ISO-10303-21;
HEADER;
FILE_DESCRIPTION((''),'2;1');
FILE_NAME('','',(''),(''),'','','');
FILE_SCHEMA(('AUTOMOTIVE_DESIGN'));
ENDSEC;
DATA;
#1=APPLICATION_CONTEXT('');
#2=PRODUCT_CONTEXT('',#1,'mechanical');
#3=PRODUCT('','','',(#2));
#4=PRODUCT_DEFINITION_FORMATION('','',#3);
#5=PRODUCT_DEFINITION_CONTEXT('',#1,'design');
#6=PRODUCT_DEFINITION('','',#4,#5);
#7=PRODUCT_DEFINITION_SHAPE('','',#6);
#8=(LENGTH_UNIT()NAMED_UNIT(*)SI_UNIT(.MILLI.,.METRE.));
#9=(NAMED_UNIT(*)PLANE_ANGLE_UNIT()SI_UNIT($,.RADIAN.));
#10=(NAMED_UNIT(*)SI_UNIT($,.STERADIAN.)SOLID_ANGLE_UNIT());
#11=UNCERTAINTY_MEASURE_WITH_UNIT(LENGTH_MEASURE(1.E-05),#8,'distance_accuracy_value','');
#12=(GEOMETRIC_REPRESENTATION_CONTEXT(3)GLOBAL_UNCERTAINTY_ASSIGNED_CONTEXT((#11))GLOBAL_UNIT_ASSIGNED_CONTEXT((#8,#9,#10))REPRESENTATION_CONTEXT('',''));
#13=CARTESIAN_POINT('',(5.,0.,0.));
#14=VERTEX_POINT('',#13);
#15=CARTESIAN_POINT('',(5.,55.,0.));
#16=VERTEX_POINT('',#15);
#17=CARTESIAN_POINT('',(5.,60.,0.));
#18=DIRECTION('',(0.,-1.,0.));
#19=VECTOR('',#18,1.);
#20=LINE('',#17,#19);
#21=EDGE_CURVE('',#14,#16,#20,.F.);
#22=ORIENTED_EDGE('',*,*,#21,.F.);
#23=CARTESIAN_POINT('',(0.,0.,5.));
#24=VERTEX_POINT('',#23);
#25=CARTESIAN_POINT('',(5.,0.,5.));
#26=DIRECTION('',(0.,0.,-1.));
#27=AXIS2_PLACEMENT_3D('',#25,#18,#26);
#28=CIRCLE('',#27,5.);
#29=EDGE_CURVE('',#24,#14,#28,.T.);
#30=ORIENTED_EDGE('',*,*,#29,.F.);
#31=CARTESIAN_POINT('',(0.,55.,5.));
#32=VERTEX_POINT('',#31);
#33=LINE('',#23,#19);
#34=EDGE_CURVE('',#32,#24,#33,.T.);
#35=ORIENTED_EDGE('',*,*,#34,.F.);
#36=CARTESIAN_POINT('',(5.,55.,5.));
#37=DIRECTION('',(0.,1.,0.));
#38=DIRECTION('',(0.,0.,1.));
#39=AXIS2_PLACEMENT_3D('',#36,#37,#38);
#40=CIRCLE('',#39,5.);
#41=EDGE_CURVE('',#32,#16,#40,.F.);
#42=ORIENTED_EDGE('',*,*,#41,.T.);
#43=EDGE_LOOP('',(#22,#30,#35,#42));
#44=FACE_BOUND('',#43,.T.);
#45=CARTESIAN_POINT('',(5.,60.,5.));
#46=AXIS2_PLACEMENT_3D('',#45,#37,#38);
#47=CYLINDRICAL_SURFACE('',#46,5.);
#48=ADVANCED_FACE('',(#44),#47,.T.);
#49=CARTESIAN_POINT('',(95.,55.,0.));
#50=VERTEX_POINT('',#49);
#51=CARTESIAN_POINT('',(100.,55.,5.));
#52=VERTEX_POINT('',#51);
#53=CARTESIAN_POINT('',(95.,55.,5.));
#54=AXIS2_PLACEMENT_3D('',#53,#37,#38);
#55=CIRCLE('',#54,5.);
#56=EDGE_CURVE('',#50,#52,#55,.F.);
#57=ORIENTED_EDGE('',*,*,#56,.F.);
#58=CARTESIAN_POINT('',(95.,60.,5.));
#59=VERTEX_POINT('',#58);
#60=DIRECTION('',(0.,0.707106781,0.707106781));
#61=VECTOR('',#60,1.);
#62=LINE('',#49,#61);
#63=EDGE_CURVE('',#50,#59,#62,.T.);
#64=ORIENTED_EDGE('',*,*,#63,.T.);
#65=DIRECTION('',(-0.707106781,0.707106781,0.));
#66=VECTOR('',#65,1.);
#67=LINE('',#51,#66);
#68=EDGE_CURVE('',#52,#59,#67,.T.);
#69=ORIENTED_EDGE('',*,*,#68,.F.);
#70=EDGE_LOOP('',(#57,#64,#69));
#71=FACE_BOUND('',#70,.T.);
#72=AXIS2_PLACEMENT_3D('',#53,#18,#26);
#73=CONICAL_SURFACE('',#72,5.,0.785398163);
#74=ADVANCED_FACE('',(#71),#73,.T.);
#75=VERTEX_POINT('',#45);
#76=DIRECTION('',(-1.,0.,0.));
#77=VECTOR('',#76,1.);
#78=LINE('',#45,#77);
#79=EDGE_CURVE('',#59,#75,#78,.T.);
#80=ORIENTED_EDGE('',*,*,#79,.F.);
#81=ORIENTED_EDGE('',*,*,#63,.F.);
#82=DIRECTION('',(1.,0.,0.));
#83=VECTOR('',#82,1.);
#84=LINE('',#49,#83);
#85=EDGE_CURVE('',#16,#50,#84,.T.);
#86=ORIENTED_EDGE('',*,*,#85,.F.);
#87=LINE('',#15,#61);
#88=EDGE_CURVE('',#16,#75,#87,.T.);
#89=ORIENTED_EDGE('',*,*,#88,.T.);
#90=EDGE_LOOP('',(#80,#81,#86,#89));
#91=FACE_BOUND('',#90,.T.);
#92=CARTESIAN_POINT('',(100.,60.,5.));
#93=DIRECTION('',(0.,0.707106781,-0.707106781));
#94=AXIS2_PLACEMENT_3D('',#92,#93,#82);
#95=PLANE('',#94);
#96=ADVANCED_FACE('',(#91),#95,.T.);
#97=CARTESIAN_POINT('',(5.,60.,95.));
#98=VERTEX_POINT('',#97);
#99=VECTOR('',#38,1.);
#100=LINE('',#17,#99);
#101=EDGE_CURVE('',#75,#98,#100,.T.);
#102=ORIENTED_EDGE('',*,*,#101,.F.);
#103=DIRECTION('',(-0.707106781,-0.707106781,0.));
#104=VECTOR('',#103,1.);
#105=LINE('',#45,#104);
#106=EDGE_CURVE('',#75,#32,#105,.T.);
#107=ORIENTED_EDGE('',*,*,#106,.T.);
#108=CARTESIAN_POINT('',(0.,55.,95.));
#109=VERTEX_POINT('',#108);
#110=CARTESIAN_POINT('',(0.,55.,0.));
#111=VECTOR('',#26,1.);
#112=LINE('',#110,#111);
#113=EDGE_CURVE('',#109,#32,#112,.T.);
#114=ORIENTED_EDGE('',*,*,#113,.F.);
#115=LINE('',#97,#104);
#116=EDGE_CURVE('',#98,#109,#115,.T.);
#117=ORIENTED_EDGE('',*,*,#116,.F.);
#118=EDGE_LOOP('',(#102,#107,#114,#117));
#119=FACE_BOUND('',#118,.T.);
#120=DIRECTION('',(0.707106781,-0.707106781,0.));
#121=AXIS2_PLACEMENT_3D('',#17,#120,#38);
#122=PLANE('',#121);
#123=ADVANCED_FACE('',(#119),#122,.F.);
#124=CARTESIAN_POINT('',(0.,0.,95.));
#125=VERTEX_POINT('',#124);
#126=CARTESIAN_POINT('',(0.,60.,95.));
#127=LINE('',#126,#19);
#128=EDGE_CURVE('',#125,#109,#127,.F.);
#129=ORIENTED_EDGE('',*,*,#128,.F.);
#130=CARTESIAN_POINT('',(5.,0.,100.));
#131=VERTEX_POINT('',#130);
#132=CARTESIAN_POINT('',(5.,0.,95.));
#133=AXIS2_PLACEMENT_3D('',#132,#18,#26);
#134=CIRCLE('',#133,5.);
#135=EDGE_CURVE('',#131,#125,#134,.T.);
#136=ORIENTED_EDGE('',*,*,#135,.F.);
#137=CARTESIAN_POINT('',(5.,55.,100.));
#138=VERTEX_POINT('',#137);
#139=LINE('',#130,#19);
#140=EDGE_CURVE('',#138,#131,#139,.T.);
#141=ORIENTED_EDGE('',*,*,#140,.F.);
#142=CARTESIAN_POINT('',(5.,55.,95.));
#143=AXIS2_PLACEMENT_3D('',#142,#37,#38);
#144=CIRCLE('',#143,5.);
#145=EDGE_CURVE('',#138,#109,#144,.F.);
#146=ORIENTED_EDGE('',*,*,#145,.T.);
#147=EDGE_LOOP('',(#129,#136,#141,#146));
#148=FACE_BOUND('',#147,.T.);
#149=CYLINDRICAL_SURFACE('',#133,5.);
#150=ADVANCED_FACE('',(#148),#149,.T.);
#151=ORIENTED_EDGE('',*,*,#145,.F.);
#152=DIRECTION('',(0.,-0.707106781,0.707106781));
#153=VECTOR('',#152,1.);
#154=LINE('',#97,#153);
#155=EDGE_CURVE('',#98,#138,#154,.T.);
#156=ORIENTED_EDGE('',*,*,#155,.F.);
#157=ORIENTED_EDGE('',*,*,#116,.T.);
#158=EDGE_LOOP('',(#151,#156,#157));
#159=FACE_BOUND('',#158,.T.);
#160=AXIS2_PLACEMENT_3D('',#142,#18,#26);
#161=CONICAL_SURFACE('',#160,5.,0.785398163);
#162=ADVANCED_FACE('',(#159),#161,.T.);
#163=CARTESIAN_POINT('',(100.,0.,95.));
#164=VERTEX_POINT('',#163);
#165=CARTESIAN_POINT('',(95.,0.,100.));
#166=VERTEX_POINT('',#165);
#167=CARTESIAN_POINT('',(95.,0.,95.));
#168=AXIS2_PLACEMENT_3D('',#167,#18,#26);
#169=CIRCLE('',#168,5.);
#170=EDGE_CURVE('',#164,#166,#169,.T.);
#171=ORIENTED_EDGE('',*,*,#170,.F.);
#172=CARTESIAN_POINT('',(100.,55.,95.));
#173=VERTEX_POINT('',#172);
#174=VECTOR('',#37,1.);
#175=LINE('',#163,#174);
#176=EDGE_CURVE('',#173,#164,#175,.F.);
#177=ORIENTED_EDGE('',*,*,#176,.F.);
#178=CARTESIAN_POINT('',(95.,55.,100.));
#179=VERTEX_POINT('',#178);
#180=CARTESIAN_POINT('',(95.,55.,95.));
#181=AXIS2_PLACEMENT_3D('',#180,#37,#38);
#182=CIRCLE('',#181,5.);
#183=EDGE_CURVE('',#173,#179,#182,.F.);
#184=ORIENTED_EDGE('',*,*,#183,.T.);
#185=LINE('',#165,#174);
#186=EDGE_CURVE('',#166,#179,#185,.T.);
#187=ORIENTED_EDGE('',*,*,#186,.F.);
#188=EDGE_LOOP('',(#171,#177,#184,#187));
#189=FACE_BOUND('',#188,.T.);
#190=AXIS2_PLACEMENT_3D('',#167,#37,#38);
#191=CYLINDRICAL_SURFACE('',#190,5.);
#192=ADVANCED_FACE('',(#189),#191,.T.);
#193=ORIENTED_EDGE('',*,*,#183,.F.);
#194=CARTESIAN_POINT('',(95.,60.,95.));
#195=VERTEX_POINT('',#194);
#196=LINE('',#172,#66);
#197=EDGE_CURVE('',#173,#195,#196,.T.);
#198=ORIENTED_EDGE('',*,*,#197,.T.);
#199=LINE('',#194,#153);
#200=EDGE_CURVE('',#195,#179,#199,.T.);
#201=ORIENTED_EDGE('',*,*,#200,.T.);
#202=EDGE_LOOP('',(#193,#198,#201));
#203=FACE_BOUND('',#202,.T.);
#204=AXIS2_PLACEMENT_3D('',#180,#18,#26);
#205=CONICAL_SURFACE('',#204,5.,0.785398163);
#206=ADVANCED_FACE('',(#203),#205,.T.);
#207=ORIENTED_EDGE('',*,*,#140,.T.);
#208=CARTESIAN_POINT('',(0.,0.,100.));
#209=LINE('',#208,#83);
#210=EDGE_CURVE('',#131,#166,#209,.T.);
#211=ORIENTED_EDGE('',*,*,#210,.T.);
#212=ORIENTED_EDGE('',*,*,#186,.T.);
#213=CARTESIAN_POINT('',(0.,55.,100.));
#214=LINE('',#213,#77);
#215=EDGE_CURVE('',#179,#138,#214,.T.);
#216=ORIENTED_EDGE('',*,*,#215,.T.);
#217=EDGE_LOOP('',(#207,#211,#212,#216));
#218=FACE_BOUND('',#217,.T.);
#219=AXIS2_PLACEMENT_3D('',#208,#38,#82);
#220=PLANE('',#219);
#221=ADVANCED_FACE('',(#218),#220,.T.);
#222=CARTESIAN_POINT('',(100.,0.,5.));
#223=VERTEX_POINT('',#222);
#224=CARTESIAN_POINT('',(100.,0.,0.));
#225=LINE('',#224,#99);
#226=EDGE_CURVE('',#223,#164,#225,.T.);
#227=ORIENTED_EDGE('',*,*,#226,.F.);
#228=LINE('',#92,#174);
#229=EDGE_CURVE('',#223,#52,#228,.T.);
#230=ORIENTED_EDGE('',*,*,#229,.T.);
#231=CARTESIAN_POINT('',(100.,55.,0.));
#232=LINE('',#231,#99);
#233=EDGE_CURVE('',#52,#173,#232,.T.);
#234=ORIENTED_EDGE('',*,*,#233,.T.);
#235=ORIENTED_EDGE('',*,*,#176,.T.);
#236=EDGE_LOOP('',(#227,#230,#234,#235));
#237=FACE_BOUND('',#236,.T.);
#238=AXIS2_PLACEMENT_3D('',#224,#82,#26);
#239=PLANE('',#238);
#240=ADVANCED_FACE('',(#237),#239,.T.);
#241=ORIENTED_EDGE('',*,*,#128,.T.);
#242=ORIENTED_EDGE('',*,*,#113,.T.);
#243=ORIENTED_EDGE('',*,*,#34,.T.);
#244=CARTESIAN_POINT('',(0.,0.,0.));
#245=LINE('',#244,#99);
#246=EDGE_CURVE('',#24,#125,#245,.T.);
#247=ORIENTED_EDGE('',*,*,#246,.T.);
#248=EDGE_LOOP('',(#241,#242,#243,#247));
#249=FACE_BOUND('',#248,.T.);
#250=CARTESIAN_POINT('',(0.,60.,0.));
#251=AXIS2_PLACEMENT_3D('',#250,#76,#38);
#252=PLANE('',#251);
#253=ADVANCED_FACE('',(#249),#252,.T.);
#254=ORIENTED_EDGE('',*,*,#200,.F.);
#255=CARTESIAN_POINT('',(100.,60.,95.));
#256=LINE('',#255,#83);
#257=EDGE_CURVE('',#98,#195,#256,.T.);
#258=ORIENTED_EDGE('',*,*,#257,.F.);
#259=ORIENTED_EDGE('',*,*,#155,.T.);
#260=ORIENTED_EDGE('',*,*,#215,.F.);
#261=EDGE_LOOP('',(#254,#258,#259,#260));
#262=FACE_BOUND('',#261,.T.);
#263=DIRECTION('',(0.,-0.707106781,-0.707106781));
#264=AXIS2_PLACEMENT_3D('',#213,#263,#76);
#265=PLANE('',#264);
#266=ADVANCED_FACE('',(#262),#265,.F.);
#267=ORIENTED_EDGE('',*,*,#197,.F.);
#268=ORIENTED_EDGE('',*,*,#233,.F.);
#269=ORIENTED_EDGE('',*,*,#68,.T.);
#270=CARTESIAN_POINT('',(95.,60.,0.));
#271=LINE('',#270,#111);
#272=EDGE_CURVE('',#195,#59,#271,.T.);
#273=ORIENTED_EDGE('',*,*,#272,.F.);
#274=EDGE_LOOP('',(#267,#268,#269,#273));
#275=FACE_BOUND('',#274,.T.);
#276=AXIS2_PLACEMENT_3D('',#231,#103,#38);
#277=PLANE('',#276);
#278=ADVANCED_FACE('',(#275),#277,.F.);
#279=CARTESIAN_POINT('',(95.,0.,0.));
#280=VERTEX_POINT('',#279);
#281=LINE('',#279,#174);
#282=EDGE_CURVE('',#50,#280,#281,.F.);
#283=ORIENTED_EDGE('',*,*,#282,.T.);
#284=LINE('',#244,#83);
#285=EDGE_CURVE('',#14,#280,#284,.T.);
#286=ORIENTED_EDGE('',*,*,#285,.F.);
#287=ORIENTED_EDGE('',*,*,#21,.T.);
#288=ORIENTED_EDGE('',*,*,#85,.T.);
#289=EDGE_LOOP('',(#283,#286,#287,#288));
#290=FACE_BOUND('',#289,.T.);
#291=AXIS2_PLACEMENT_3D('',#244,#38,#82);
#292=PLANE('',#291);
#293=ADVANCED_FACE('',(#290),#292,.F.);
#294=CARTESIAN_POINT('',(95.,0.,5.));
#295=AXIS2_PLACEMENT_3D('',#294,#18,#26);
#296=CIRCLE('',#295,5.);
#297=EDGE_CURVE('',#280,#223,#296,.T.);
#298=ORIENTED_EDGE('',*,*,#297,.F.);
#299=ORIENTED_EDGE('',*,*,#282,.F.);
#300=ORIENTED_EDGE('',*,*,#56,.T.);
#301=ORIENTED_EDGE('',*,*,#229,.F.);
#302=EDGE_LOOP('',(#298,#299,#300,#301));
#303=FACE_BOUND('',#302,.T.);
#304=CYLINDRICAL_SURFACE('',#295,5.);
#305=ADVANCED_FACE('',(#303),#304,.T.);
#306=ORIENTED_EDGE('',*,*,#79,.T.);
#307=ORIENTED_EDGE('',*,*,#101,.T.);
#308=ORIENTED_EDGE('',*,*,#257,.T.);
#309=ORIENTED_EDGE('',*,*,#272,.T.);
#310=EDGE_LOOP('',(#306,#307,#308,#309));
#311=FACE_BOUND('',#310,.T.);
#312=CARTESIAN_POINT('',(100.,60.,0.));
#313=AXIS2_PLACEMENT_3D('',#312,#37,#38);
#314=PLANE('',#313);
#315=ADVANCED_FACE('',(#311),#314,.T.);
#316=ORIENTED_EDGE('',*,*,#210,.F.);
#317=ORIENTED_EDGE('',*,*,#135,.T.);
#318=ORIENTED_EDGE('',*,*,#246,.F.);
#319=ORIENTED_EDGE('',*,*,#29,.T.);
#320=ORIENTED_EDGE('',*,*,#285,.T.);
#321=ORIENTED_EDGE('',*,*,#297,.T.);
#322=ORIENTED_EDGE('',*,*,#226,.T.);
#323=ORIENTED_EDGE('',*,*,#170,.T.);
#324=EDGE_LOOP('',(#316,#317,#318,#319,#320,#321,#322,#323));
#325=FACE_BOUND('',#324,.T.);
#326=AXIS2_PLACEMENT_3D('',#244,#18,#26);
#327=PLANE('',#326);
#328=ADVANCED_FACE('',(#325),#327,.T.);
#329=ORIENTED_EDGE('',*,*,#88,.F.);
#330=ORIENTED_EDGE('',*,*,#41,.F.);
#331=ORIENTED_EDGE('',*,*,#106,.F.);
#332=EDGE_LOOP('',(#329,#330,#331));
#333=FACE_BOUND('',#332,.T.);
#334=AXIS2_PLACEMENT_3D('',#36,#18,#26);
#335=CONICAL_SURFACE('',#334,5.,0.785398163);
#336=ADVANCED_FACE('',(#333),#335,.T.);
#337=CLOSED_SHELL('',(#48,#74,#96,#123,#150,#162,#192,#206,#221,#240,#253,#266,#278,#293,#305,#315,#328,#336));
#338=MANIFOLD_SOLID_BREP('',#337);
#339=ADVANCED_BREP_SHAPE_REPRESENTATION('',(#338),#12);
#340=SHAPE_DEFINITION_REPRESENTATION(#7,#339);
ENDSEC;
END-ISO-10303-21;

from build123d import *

# Parameters (mm, degrees)
DODANIE_WYCI_GNI_CIE1_DEPTH = 100
ZAOKR_GLENIE3_R             = 5
SFAZOWANIE1_SIZE            = 5


with BuildPart() as part:
    # Szkic 3D1 → Dodanie-wyciągnięcie1 (new body)
    with BuildSketch(Plane(origin=(0, 0, 0), x_dir=(0.8574929257125442, 0.5144957554275265, 0), z_dir=(0, 0, 1))):
        Polygon((0, 0), (85.749292571, -51.449575543), (116.619037897, 0), (30.869745326, 51.449575543), align=None)
    extrude(amount=DODANIE_WYCI_GNI_CIE1_DEPTH)

    # Zaokrąglenie3
    zaokr_glenie3_edges = [part.edges().sort_by_distance(p)[0] for p in [
        (0, 30, 100),
        (0, 30, 0),
        (100, 30, 0),
        (100, 30, 100),
    ]]
    fillet(zaokr_glenie3_edges, radius=ZAOKR_GLENIE3_R)

    # Sfazowanie1
    sfazowanie1_edges = [part.edges().sort_by_distance(p)[0] for p in [
        (50, 60, 100),
        (0, 60, 50),
        (100, 60, 50),
        (50, 60, 0),
        (98.535533906, 60, 98.535533906),
        (98.535533906, 60, 1.464466094),
        (1.464466094, 60, 1.464466094),
        (1.464466094, 60, 98.535533906),
    ]]
    chamfer(sfazowanie1_edges, length=SFAZOWANIE1_SIZE - 0.0001)  # a hair under: the kernel refuses the full size


solid = part.part
